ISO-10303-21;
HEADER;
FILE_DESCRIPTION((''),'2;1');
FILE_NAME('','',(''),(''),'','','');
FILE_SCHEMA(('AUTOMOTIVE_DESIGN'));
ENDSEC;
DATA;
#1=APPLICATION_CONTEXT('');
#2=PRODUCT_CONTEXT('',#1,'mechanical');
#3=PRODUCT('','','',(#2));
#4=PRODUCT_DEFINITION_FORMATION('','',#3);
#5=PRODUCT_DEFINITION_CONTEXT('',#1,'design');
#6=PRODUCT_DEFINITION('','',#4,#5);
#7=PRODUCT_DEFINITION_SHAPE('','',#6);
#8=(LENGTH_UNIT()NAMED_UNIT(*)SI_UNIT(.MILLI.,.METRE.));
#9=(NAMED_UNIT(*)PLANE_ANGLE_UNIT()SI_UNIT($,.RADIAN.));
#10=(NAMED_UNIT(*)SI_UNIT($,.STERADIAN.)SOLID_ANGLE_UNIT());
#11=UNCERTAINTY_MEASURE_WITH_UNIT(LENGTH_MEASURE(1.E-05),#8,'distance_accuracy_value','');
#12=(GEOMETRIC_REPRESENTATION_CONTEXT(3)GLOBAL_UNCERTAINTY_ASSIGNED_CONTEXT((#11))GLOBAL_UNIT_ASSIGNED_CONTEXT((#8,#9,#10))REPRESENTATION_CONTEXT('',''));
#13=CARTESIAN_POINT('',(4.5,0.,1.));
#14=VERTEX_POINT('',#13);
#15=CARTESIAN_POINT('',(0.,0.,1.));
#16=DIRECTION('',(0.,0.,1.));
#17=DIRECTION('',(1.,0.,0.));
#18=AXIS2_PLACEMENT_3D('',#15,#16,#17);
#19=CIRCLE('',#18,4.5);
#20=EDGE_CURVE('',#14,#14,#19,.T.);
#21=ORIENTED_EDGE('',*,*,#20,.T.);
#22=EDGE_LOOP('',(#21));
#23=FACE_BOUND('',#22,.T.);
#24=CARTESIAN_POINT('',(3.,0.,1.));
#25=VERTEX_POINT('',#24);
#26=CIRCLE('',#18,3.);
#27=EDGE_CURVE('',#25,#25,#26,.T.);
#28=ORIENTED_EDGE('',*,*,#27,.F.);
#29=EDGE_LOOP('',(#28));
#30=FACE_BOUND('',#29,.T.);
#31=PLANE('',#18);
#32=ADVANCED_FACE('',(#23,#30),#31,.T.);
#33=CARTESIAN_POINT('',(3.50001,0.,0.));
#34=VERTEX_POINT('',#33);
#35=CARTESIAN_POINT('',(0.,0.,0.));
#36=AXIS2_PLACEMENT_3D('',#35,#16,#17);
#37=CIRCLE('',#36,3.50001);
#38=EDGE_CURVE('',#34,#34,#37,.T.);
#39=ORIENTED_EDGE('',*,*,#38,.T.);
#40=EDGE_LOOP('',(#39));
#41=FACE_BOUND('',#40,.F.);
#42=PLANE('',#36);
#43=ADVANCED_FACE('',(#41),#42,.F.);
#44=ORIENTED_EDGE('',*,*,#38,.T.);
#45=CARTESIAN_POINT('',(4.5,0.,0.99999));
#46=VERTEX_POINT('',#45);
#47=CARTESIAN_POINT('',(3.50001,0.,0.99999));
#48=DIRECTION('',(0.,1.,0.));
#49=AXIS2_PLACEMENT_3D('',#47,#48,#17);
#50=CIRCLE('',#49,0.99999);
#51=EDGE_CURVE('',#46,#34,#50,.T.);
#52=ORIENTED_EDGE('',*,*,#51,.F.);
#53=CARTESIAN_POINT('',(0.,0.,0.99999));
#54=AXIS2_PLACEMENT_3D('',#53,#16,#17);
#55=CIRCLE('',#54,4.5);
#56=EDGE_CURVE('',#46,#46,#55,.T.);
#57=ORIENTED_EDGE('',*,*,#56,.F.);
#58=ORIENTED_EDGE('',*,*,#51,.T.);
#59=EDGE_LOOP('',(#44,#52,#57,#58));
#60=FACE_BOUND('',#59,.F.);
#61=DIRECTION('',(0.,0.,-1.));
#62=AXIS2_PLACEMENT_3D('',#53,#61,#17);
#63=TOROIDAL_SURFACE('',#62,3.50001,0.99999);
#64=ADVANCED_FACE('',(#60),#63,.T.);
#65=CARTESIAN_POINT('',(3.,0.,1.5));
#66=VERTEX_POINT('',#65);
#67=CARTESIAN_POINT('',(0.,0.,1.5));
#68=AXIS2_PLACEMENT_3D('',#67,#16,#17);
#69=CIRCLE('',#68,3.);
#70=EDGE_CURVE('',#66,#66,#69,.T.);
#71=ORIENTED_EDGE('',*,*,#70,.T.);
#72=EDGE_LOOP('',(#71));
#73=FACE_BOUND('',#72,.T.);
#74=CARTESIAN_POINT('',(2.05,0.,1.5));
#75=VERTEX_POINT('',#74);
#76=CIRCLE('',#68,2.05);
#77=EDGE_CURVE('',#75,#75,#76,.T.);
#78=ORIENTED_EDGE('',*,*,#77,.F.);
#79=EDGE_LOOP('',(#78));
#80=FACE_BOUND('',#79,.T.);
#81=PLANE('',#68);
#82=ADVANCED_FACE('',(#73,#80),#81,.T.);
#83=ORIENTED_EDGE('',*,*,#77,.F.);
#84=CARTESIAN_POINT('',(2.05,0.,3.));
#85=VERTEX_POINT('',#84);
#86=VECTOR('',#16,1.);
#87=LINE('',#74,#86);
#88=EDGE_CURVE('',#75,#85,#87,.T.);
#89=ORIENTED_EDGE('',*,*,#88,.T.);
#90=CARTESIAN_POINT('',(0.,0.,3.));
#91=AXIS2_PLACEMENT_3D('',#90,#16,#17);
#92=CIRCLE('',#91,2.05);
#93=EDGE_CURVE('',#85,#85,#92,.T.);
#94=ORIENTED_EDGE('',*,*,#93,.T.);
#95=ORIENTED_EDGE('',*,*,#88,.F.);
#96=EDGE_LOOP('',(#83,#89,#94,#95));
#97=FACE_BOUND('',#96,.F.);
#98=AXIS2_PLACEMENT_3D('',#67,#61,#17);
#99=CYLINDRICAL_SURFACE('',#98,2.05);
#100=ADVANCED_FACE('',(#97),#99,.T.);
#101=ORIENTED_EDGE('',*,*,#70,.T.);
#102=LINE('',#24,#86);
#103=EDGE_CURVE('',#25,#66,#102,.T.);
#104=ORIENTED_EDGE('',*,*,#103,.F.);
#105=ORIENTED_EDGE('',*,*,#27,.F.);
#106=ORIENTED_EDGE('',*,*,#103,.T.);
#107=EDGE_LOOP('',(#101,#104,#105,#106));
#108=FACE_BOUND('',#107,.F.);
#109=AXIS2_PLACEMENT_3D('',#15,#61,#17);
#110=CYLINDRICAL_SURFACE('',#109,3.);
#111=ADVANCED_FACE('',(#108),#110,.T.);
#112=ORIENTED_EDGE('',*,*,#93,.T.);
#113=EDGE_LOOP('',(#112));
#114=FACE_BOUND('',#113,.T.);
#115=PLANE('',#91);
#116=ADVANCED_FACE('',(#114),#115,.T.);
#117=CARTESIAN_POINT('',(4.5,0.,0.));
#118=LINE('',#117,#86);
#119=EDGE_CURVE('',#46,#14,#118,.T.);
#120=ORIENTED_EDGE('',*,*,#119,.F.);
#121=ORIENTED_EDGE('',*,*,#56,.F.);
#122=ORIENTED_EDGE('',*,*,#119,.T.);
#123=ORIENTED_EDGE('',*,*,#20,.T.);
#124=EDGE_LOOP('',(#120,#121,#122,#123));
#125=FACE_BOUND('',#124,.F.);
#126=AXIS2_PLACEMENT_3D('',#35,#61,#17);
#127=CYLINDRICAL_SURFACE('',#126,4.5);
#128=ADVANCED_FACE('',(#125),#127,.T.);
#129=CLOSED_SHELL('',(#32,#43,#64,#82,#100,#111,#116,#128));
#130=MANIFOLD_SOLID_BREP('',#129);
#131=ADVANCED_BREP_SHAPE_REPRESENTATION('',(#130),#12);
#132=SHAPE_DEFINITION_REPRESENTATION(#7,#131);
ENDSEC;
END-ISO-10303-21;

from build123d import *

# Parameters (mm, degrees)
F0_R     = 4.5
F1_DEPTH = 1
F2_R     = 3
F3_DEPTH = 0.5
F4_R     = 2.05
F5_DEPTH = 1.5
F6_R     = 0.99999


# Not quite as in the source:
# - a fillet or chamfer is up to 0.001 mm smaller than in the source, because OpenCascade refuses the exact size


with BuildPart() as f1:
    # F0 (on Top) → F1 (new body)
    with BuildSketch(Plane.XY):
        Circle(F0_R)
    extrude(amount=F1_DEPTH)

    # F2 (on face) → F3 (join)
    with BuildSketch(Plane.XY.offset(1)):
        Circle(F2_R)
    extrude(amount=F3_DEPTH)

    # F4 (on face) → F5 (join)
    with BuildSketch(Plane.XY.offset(1.5)):
        Circle(F4_R)
    extrude(amount=F5_DEPTH)

    # F6 (radius 1 in the source; OpenCascade refuses exactly that, so slightly less here)
    f6_edges = [f1.edges().sort_by_distance(p)[0] for p in [
        (-4.5, 0, 0),
    ]]
    fillet(f6_edges, radius=F6_R)


solid = f1.part
